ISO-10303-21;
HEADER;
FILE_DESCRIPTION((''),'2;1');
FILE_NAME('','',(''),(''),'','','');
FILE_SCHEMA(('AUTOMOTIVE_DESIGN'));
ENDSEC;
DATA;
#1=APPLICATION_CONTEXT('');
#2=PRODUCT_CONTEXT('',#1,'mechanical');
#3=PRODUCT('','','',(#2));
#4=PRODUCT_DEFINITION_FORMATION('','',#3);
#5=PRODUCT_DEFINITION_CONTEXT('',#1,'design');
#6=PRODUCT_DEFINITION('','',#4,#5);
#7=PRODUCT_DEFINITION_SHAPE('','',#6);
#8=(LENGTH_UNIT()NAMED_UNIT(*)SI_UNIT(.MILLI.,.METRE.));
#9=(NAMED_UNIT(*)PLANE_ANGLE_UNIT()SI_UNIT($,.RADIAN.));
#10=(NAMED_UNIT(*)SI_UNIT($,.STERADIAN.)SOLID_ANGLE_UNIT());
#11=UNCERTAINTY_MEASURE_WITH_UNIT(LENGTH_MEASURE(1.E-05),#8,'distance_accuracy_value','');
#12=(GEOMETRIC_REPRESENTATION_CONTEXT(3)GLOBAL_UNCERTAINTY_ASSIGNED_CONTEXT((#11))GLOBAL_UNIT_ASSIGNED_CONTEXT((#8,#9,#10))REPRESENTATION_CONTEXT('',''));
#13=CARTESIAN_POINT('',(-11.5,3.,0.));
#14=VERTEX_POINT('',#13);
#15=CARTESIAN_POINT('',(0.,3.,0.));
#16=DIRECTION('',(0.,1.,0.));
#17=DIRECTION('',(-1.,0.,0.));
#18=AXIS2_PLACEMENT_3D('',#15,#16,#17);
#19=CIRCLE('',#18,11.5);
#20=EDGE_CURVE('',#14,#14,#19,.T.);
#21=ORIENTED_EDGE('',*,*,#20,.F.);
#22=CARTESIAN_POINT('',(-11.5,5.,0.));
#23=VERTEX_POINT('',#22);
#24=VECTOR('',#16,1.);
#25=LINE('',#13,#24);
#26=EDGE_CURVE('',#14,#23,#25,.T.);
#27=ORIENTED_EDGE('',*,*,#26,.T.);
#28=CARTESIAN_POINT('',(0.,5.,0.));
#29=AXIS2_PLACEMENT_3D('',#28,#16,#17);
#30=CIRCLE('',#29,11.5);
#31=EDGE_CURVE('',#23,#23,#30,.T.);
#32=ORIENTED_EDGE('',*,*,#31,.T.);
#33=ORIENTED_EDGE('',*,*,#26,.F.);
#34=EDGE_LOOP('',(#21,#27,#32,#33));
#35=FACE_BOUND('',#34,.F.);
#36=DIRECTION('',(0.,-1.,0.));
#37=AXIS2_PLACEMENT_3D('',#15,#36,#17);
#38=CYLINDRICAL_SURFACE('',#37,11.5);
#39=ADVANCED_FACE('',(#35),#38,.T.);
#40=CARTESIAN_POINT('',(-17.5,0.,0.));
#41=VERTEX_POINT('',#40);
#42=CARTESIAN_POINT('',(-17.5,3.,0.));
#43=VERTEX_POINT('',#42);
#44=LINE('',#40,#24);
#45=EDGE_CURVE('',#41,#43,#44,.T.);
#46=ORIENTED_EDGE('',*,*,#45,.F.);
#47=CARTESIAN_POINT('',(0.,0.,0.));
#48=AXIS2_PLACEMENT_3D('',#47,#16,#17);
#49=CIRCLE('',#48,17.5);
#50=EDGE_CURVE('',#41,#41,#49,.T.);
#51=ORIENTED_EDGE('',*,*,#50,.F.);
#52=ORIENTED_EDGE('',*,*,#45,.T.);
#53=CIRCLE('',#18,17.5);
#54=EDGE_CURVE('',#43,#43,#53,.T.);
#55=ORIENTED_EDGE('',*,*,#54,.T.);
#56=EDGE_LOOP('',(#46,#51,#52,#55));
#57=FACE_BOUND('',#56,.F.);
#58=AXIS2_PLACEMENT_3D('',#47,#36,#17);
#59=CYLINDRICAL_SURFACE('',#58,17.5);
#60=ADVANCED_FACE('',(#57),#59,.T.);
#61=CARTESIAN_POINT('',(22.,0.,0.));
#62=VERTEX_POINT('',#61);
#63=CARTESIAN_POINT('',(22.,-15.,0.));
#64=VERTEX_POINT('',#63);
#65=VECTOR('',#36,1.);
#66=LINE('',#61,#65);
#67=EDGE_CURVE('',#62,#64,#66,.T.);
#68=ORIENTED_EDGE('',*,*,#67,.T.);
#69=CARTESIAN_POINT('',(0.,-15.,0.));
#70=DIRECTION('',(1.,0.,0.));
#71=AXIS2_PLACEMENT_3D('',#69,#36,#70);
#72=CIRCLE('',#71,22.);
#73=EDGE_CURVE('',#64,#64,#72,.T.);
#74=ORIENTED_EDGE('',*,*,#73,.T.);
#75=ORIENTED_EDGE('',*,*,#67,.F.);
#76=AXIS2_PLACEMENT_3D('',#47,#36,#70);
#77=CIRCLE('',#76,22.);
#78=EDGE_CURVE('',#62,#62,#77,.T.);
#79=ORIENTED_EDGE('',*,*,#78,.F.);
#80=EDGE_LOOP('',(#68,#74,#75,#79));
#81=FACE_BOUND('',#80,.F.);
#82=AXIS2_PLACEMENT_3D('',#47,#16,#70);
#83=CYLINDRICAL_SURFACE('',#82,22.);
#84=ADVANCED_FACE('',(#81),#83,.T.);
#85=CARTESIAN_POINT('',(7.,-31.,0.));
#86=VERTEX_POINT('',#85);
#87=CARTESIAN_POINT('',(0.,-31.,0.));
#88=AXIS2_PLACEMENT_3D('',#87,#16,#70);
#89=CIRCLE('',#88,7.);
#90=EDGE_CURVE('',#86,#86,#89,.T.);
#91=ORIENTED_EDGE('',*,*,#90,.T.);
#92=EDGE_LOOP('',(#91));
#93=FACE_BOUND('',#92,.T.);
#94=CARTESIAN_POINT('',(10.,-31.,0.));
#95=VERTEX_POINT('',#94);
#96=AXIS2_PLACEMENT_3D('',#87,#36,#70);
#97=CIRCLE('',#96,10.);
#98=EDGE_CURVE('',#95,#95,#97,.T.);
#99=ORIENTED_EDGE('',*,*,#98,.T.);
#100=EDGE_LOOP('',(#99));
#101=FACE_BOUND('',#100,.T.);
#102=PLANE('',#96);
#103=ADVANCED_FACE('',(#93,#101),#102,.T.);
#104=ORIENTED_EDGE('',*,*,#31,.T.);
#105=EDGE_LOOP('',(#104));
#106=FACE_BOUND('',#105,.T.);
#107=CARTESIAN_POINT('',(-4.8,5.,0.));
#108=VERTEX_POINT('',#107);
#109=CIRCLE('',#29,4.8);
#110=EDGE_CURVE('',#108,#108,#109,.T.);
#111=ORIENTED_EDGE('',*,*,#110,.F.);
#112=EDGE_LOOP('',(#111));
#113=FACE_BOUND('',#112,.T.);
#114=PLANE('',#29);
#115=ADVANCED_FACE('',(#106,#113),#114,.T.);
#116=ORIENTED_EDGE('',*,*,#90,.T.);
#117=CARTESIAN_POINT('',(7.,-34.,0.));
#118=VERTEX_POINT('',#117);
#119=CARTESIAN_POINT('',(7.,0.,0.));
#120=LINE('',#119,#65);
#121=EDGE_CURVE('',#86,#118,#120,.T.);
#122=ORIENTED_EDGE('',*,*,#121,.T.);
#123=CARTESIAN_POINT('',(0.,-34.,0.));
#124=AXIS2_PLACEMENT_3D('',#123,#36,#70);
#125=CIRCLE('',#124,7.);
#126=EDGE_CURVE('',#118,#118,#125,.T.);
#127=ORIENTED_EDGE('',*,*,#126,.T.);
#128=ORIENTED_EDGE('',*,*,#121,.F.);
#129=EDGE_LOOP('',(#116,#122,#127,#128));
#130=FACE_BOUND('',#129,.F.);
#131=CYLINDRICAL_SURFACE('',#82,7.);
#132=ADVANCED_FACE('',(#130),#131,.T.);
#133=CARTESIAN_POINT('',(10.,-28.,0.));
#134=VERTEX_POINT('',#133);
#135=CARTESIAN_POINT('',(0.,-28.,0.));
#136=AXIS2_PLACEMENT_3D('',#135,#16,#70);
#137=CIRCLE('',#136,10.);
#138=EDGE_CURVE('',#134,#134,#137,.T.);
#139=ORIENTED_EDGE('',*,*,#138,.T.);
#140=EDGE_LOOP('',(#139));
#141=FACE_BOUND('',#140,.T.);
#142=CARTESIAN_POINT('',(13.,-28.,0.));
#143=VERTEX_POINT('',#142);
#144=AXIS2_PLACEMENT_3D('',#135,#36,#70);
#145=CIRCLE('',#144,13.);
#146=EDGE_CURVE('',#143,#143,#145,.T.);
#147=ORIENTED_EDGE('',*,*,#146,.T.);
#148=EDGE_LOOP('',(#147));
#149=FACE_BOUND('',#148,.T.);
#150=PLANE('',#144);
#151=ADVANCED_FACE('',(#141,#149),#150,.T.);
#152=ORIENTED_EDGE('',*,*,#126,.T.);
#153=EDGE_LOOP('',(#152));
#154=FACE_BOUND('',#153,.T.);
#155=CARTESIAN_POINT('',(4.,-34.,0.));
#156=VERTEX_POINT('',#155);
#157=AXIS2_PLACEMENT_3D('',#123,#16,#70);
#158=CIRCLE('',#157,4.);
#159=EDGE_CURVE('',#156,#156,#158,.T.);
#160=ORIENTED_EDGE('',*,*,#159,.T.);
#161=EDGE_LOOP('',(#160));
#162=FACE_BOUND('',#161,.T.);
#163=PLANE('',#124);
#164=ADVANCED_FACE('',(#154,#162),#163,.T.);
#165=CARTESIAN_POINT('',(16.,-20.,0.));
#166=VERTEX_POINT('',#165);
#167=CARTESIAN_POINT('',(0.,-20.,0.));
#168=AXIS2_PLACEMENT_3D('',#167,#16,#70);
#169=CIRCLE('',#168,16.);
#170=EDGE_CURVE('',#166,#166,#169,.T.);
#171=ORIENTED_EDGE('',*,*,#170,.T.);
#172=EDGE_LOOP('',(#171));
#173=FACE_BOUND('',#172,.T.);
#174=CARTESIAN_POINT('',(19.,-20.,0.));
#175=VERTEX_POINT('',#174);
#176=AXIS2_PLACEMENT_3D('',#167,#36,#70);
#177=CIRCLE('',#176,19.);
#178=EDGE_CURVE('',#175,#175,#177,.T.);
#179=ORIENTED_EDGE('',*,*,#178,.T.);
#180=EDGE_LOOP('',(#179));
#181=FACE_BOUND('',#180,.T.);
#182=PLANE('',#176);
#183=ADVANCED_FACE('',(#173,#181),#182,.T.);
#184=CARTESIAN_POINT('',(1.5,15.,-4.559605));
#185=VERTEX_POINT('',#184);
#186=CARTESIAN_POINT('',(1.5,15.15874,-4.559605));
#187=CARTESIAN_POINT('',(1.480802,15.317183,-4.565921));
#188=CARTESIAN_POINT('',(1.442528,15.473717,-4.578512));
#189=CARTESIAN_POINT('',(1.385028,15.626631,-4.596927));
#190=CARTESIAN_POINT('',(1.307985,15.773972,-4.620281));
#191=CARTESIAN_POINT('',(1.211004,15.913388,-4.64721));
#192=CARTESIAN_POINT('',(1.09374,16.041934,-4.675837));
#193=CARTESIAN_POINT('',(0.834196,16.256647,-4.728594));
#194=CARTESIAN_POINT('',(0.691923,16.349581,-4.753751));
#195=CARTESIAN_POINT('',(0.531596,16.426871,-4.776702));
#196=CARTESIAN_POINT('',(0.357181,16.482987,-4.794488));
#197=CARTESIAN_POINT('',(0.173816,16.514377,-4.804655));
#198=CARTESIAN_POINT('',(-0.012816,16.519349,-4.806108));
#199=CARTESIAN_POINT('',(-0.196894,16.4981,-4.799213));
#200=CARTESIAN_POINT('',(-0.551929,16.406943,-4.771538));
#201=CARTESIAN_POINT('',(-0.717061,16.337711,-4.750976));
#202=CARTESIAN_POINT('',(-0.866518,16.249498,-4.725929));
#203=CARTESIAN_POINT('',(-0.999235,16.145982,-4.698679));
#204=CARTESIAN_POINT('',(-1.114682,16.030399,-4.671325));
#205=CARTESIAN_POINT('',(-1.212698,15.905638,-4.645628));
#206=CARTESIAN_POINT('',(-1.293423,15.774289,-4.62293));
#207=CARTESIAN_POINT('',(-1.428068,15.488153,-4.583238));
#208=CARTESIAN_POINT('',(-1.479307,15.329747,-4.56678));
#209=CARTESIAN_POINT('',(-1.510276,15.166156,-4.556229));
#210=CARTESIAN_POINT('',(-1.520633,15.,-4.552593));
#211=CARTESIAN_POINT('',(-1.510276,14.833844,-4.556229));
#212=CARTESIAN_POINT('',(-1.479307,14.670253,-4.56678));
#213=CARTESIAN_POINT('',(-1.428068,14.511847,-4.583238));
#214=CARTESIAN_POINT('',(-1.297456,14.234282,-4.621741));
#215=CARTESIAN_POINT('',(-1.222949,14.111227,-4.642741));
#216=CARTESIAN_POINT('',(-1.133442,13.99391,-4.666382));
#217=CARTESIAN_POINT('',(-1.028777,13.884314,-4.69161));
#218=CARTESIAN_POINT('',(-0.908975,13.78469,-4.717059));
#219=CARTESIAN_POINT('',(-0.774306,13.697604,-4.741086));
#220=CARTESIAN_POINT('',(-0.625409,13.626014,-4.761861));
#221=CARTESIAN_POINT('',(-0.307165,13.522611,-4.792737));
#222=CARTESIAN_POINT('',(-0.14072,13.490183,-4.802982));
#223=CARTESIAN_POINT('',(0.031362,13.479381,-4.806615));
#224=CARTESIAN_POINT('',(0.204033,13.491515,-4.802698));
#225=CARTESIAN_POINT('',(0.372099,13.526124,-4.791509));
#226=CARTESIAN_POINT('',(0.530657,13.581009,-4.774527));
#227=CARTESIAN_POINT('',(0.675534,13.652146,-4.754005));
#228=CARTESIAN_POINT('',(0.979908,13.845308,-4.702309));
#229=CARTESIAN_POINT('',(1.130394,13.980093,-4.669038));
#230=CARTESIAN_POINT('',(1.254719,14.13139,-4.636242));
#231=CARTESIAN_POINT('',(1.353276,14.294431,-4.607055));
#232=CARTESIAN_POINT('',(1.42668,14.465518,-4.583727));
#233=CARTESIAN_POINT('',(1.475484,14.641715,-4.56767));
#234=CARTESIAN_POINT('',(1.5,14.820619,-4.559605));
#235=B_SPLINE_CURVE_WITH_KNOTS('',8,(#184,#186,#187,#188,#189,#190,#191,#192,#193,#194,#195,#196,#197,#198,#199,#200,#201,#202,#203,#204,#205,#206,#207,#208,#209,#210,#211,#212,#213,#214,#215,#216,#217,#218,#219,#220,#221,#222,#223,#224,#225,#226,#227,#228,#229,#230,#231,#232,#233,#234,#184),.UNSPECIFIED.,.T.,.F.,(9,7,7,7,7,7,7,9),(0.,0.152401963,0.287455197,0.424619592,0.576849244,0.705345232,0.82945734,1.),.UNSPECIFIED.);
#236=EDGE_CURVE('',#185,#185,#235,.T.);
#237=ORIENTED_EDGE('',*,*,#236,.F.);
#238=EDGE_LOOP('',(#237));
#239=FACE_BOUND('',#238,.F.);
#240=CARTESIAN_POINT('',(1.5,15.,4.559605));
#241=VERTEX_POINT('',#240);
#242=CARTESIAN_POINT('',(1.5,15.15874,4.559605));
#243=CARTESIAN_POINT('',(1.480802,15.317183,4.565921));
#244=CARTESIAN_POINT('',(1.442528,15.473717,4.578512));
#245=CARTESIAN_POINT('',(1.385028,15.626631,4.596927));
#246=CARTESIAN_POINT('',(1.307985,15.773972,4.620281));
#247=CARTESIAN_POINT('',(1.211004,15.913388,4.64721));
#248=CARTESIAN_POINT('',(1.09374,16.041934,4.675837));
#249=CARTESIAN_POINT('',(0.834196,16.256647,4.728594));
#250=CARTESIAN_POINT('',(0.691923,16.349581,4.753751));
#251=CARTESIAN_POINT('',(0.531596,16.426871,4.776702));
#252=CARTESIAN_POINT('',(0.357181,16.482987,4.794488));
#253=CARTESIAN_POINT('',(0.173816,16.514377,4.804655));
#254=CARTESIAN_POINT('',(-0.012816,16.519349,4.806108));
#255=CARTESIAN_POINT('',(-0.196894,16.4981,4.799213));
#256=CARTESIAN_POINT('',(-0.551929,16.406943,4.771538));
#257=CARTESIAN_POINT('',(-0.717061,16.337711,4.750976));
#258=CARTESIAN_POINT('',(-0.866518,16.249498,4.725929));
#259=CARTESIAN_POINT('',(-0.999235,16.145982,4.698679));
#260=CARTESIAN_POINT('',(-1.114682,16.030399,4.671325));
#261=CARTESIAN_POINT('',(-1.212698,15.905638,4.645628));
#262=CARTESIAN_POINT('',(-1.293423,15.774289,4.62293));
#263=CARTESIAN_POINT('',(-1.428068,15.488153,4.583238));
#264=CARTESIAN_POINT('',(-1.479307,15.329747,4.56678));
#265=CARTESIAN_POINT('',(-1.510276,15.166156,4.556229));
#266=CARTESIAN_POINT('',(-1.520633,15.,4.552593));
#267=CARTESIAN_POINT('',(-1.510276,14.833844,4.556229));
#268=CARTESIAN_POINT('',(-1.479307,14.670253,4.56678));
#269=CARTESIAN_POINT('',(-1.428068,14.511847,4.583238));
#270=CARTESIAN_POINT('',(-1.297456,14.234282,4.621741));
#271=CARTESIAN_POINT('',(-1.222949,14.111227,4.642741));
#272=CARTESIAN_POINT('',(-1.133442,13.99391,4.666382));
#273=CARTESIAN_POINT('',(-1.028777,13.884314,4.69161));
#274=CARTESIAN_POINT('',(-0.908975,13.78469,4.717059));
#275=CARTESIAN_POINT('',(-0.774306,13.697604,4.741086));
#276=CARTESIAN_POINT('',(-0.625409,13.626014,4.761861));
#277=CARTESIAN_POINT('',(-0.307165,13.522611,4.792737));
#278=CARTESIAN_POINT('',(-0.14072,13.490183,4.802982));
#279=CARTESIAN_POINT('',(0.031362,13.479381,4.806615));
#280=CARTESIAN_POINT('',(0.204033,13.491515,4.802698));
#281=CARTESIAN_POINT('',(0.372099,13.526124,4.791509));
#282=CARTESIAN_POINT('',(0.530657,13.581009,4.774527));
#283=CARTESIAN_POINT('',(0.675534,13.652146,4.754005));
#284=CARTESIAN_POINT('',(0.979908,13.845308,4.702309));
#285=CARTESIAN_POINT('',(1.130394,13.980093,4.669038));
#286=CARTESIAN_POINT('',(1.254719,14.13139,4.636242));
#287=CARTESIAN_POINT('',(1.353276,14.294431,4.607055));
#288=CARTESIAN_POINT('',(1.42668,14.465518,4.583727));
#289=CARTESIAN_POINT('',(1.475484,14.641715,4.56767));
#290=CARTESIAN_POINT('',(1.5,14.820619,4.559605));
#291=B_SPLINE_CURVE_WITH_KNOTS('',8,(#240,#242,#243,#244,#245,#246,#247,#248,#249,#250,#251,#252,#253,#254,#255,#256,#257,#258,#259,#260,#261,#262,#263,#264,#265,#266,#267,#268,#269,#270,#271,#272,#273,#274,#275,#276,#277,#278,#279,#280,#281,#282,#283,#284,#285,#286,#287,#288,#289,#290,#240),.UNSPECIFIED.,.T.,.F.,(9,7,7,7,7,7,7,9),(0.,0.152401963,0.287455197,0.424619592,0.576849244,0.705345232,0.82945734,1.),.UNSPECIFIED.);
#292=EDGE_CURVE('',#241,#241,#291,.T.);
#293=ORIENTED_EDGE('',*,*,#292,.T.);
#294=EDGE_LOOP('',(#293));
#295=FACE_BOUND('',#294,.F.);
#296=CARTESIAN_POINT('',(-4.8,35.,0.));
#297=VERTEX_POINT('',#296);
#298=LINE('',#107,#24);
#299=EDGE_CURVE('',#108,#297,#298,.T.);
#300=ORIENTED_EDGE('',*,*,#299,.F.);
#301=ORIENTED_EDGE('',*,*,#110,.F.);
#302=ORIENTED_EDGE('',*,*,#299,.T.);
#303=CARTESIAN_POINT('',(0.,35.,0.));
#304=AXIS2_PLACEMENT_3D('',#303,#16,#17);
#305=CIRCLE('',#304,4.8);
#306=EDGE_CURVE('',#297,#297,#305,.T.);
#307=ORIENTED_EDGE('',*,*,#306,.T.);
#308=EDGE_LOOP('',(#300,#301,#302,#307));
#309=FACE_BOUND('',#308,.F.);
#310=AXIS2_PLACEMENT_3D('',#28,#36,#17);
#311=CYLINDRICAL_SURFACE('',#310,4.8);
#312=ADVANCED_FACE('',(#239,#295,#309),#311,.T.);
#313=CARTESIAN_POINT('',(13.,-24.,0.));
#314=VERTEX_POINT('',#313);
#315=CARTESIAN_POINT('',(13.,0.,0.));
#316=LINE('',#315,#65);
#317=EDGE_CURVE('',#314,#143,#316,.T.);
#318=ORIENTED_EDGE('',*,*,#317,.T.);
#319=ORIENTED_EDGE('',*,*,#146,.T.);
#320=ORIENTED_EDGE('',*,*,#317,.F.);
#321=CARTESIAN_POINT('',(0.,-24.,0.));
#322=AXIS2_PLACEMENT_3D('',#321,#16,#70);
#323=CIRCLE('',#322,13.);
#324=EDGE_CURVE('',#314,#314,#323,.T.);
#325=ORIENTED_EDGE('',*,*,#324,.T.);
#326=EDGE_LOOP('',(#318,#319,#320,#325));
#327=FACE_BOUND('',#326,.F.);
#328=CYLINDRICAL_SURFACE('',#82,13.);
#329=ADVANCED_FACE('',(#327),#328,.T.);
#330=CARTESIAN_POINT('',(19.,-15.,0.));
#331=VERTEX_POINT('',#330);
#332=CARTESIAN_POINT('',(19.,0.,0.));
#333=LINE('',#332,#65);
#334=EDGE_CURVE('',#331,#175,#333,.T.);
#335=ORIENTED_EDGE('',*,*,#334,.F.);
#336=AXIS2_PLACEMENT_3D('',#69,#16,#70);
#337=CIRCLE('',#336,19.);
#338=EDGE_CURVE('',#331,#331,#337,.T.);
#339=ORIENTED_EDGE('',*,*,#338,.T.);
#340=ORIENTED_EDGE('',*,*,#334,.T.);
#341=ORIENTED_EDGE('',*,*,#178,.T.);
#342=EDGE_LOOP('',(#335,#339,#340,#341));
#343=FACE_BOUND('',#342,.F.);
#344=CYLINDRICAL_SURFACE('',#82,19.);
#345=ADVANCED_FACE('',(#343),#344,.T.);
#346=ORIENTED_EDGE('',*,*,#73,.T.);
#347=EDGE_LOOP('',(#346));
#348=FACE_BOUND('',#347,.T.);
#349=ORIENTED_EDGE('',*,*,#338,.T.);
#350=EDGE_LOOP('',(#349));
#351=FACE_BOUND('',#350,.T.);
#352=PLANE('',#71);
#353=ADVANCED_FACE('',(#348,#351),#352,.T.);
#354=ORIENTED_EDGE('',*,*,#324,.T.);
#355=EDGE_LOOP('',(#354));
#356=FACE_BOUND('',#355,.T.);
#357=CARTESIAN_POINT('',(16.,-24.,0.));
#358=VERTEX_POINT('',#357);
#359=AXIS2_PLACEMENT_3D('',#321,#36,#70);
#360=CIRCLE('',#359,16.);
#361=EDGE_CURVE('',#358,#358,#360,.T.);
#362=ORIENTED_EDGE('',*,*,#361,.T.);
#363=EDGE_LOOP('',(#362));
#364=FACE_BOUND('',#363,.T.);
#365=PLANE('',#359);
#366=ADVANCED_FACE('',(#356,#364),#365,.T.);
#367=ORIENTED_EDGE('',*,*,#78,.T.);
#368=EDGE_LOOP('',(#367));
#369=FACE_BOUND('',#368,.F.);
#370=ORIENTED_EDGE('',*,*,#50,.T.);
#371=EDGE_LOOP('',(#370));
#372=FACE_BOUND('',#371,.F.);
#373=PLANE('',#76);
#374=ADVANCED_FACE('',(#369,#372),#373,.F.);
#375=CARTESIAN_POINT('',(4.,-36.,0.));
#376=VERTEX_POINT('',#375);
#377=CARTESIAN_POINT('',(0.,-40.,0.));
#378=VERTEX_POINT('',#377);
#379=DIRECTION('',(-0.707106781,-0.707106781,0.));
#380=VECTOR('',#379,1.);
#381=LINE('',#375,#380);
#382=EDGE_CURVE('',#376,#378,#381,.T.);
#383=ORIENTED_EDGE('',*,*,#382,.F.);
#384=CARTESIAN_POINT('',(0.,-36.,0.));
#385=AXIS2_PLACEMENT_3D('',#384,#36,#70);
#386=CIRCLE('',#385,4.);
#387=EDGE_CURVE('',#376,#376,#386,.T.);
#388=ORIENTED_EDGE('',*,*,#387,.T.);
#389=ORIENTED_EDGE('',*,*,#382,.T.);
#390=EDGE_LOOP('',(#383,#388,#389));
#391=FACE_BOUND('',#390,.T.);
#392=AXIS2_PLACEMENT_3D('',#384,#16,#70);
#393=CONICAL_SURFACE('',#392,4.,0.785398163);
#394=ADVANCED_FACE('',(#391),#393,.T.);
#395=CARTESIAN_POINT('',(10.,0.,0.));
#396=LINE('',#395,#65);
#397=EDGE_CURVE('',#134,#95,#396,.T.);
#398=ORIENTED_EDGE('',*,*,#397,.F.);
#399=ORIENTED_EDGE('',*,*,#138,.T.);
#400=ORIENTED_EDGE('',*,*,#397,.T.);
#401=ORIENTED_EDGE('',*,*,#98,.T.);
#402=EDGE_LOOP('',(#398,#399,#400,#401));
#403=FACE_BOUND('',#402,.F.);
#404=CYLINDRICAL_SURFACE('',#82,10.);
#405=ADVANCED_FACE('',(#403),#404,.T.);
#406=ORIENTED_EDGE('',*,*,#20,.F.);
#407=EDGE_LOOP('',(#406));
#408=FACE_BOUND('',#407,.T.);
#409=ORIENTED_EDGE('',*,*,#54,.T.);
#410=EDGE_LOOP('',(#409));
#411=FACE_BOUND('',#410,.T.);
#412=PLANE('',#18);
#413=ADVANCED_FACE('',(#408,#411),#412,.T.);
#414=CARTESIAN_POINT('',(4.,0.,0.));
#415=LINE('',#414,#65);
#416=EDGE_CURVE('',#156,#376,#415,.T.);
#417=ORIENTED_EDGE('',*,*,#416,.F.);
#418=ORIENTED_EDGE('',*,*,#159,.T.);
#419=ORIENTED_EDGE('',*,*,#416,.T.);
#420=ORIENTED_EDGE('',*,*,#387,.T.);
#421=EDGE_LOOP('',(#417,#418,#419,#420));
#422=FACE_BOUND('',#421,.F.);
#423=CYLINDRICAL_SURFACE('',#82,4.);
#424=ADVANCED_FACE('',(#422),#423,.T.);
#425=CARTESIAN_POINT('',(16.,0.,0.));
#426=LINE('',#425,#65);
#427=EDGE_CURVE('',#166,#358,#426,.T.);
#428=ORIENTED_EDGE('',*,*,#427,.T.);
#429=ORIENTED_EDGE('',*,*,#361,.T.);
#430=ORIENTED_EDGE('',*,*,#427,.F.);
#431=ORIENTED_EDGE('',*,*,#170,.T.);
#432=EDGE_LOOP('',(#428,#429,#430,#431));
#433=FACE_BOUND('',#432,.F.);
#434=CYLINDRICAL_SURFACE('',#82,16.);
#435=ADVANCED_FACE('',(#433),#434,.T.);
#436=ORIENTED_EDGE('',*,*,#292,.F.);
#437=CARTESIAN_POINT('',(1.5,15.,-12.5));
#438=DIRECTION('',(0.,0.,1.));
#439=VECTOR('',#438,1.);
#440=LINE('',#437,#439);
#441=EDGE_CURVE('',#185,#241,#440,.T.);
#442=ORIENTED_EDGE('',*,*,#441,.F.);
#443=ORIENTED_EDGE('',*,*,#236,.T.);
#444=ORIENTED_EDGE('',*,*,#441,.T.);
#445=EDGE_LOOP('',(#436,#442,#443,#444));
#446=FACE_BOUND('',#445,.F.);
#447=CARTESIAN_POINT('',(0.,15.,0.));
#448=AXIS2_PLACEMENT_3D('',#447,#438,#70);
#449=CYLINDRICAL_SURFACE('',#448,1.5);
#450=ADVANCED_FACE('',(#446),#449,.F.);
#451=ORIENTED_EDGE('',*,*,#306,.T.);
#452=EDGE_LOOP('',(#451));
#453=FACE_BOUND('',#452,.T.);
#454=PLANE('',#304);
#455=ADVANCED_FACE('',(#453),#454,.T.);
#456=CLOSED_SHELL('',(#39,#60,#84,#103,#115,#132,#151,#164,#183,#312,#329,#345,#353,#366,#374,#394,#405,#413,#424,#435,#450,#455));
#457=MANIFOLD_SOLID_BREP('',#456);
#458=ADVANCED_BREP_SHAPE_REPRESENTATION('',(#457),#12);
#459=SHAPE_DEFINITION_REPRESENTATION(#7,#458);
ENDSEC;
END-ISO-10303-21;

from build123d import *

# Parameters (mm, degrees)
F0_R      = 22
F0_R_2    = 19
F0_R_3    = 16
F0_R_4    = 13
F0_R_5    = 10
F0_R_6    = 7
F0_R_7    = 4
F1_DEPTH  = 15
F2_DEPTH  = 20
F3_DEPTH  = 24
F4_DEPTH  = 28
F5_DEPTH  = 31
F6_DEPTH  = 34
F7_DEPTH  = 40
F8_SIZE   = 4
F9_R      = 17.5
F10_DEPTH = 3
F11_R     = 11.5
F12_DEPTH = 2
F13_R     = 4.8
F14_DEPTH = 30
F15_R     = 1.5
F16_DEPTH = 12.5


# Not quite as in the source:
# - a feature names something its author has since deleted; it is built from what else it names


with BuildPart() as f1:
    # F0 (on Front) → F1 (new body)
    with BuildSketch(Plane.XZ):
        Circle(F0_R)
        Circle(F0_R_2, mode=Mode.SUBTRACT)
        Circle(F0_R_2)
        Circle(F0_R_3, mode=Mode.SUBTRACT)
        Circle(F0_R_3)
        Circle(F0_R_4, mode=Mode.SUBTRACT)
        Circle(F0_R_4)
        Circle(F0_R_5, mode=Mode.SUBTRACT)
        Circle(F0_R_5)
        Circle(F0_R_6, mode=Mode.SUBTRACT)
        Circle(F0_R_6)
        Circle(F0_R_7, mode=Mode.SUBTRACT)
        Circle(F0_R_7)
    extrude(amount=F1_DEPTH)

    # F0 (on Front) → F2 (join)
    with BuildSketch(Plane.XZ):
        Circle(F0_R_2)
        Circle(F0_R_3, mode=Mode.SUBTRACT)
        Circle(F0_R_3)
        Circle(F0_R_4, mode=Mode.SUBTRACT)
        Circle(F0_R_4)
        Circle(F0_R_5, mode=Mode.SUBTRACT)
        Circle(F0_R_5)
        Circle(F0_R_6, mode=Mode.SUBTRACT)
        Circle(F0_R_6)
        Circle(F0_R_7, mode=Mode.SUBTRACT)
        Circle(F0_R_7)
    extrude(amount=F2_DEPTH)

    # F0 (on Front) → F3 (join)
    with BuildSketch(Plane.XZ):
        Circle(F0_R_3)
        Circle(F0_R_4, mode=Mode.SUBTRACT)
        Circle(F0_R_4)
        Circle(F0_R_5, mode=Mode.SUBTRACT)
        Circle(F0_R_5)
        Circle(F0_R_6, mode=Mode.SUBTRACT)
        Circle(F0_R_6)
        Circle(F0_R_7, mode=Mode.SUBTRACT)
        Circle(F0_R_7)
    extrude(amount=F3_DEPTH)

    # F0 (on Front) → F4 (join)
    with BuildSketch(Plane.XZ):
        Circle(F0_R_4)
        Circle(F0_R_5, mode=Mode.SUBTRACT)
        Circle(F0_R_5)
        Circle(F0_R_6, mode=Mode.SUBTRACT)
        Circle(F0_R_6)
        Circle(F0_R_7, mode=Mode.SUBTRACT)
        Circle(F0_R_7)
    extrude(amount=F4_DEPTH)

    # F0 (on Front) → F5 (join)
    with BuildSketch(Plane.XZ):
        Circle(F0_R_5)
        Circle(F0_R_6, mode=Mode.SUBTRACT)
        Circle(F0_R_6)
        Circle(F0_R_7, mode=Mode.SUBTRACT)
        Circle(F0_R_7)
    extrude(amount=F5_DEPTH)

    # F0 (on Front) → F6 (join)
    with BuildSketch(Plane.XZ):
        Circle(F0_R_6)
        Circle(F0_R_7, mode=Mode.SUBTRACT)
        Circle(F0_R_7)
    extrude(amount=F6_DEPTH)

    # F0 (on Front) → F7 (join)
    with BuildSketch(Plane.XZ):
        Circle(F0_R_7)
    extrude(amount=F7_DEPTH)

    # F8
    f8_edges = [f1.edges().sort_by_distance(p)[0] for p in [
        (-4, -40, 0),
    ]]
    chamfer(f8_edges, length=F8_SIZE)

    # F9 (on face) → F10 (join)
    with BuildSketch(Plane(origin=(0, 0, 0), x_dir=(-1, 0, 0), z_dir=(0, 1, 0))):
        Circle(F9_R)
    extrude(amount=F10_DEPTH)

    # F11 (on face) → F12 (join)
    with BuildSketch(Plane(origin=(0, 3, 0), x_dir=(-1, 0, 0), z_dir=(0, 1, 0))):
        Circle(F11_R)
    extrude(amount=F12_DEPTH)

    # F13 (on face) → F14 (join)
    with BuildSketch(Plane(origin=(0, 5, 0), x_dir=(-1, 0, 0), z_dir=(0, 1, 0))):
        Circle(F13_R)
    extrude(amount=F14_DEPTH)

    # F15 (on Top) → F16 (cut, symmetric)
    with BuildSketch(Plane.XY):
        with Locations((0, 15)):
            Circle(F15_R)
    extrude(amount=F16_DEPTH, both=True, mode=Mode.SUBTRACT)


solid = f1.part
